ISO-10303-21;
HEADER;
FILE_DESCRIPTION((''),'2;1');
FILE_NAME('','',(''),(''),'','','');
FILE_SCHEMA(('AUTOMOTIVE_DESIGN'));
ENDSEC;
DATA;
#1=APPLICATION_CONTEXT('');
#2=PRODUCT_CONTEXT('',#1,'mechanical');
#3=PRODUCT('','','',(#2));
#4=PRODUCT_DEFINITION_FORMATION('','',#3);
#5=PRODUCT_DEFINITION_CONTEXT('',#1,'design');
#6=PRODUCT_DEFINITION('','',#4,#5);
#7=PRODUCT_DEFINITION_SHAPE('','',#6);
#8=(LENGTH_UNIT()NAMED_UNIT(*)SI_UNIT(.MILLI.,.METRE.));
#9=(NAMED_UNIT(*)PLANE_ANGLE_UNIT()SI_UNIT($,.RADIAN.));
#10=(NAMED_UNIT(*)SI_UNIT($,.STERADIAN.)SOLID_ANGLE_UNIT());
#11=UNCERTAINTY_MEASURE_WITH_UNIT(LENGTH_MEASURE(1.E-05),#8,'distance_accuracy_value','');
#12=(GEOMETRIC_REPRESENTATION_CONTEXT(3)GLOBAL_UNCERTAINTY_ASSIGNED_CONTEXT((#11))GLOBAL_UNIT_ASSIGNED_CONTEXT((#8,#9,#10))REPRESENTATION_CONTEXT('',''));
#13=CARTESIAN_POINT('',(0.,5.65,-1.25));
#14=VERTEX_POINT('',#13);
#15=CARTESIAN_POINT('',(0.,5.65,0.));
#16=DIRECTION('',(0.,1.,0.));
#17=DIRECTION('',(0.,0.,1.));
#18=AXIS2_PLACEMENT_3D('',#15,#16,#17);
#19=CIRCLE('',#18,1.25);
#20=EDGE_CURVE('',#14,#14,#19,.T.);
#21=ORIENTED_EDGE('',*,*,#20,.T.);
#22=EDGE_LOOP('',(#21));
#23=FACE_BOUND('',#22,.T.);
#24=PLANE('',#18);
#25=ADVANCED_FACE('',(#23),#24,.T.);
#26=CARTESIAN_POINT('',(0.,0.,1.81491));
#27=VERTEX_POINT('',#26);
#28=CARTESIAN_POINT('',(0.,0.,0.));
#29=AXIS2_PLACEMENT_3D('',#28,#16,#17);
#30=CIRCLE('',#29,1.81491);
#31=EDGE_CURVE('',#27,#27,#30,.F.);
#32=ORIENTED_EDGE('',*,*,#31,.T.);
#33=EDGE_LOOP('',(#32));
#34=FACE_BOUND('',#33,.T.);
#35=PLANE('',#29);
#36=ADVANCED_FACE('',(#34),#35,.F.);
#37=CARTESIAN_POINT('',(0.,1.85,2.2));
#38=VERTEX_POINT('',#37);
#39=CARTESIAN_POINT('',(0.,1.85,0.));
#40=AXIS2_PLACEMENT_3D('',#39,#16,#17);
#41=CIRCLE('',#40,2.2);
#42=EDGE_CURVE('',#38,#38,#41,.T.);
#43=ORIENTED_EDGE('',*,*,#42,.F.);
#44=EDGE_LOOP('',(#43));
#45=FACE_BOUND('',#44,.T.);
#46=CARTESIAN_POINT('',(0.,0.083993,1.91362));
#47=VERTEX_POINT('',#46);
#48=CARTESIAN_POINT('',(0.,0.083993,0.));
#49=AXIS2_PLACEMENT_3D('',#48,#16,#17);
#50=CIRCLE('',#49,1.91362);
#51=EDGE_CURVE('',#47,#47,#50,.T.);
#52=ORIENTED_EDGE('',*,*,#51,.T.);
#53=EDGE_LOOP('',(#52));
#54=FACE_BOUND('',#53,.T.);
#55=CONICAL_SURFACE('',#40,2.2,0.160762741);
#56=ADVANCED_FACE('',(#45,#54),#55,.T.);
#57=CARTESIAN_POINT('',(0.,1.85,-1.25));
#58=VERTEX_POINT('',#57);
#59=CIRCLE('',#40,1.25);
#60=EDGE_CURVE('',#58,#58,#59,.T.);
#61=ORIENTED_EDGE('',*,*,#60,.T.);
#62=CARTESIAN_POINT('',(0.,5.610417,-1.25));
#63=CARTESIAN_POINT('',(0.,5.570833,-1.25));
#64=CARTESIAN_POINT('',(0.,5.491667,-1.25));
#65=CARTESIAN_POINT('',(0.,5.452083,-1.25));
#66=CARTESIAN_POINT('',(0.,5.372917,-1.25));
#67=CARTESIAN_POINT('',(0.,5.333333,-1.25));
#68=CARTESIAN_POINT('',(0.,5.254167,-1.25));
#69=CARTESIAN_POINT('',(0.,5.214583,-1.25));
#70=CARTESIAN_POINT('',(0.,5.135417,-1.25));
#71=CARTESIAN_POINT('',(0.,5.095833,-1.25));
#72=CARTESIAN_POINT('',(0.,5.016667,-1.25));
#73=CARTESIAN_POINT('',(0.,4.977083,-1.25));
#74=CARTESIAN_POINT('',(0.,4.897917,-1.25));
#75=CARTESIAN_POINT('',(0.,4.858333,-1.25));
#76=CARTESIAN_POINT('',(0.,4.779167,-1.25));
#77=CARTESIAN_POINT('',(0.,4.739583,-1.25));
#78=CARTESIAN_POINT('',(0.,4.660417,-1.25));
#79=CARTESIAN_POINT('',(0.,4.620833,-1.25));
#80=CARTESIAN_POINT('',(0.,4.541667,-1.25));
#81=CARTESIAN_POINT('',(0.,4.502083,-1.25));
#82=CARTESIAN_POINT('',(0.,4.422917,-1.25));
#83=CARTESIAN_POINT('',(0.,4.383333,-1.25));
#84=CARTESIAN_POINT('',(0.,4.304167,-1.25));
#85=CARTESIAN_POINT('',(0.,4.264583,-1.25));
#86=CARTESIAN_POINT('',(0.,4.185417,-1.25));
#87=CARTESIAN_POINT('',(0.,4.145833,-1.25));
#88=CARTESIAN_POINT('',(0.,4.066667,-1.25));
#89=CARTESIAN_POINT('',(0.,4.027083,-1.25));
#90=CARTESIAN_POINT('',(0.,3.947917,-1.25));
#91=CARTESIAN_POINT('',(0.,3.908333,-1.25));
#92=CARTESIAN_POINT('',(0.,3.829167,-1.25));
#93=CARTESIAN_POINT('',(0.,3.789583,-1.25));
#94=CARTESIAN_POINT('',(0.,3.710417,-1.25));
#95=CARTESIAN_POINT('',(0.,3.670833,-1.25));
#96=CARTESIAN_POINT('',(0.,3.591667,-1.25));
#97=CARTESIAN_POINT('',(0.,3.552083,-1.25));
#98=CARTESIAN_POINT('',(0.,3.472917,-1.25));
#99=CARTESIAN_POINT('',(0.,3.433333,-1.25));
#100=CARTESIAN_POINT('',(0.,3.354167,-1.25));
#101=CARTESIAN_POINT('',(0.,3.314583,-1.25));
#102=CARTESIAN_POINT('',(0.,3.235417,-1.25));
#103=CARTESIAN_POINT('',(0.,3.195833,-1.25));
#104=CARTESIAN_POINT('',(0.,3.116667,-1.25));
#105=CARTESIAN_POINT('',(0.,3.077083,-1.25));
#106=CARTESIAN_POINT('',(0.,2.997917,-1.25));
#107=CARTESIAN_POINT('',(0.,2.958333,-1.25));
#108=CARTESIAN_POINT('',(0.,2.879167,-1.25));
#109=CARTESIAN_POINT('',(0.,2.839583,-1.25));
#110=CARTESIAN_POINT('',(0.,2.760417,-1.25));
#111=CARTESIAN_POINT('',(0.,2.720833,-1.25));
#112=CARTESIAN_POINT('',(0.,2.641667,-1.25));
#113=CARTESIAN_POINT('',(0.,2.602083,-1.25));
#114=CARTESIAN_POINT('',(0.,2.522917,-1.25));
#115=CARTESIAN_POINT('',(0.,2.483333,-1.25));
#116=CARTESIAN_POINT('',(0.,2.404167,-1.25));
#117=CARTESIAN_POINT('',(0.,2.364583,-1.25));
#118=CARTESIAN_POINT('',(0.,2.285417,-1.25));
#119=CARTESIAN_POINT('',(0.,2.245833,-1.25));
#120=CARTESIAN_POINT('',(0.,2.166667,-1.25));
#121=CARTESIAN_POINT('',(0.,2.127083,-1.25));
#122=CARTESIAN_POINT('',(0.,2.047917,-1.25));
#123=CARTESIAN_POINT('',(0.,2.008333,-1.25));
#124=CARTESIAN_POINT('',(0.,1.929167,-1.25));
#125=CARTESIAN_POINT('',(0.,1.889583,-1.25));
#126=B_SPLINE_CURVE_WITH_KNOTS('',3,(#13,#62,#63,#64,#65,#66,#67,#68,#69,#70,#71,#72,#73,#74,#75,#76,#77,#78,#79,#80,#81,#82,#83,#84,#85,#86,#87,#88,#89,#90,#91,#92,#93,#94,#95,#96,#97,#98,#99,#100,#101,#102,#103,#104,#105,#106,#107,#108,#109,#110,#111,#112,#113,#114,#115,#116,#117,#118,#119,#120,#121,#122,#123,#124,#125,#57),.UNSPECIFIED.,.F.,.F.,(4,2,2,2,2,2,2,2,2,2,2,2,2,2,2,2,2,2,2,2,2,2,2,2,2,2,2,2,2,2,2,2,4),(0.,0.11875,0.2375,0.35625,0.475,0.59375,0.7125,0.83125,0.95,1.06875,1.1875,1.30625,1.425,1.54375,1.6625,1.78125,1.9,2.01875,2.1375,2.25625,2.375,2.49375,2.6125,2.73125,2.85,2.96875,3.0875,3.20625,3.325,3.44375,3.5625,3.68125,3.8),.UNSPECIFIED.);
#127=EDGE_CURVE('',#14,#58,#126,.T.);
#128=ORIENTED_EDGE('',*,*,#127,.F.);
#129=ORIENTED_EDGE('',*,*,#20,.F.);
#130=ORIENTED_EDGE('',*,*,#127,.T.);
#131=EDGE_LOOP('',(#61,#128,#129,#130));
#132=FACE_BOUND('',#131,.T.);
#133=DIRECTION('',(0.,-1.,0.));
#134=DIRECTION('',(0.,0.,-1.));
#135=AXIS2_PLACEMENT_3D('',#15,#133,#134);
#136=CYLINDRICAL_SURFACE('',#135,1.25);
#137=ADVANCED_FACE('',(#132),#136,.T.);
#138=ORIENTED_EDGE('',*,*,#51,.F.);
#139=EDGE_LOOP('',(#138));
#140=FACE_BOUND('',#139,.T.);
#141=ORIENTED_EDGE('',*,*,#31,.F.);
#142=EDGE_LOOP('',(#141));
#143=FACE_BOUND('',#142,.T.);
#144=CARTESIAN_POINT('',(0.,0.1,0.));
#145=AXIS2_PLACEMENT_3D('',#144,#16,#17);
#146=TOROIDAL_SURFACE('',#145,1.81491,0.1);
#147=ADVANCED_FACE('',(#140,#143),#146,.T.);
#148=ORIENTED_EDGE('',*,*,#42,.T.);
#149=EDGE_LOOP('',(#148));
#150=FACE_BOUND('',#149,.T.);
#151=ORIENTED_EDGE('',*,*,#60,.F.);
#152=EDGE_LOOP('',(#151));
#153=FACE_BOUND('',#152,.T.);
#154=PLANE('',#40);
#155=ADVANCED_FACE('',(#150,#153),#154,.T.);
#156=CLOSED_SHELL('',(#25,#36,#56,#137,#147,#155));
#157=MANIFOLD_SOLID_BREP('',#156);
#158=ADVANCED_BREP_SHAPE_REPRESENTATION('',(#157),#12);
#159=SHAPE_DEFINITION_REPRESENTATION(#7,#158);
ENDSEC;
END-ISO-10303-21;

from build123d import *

# Parameters (mm, degrees)
ESQUISSE1_R        = 2.2
BOSS_EXTRU_1_DEPTH = 1.85
ESQUISSE2_R        = 1.25
BOSS_EXTRU_2_DEPTH = 3.8
CHANFREIN1_SIZE    = 1.85
CHANFREIN1_SIZE_2  = 0.3
CONG_1_R           = 0.1


with BuildPart() as part:
    # Esquisse1 → Boss.-Extru.1 (new body)
    with BuildSketch(Plane(origin=(0, 0, 0), x_dir=(1, 0, 0), z_dir=(0, 1, 0))):
        with Locations(Location((0, 0, 0), (0, 0, 270))):
            Circle(ESQUISSE1_R)
    extrude(amount=BOSS_EXTRU_1_DEPTH)

    # Esquisse2 → Boss.-Extru.2 (add)
    with BuildSketch(Plane(origin=(0, 1.85, 0), x_dir=(1, 0, 0), z_dir=(0, 1, 0))):
        with Locations(Location((0, 0, 0), (0, 0, 90))):
            Circle(ESQUISSE2_R)
    extrude(amount=BOSS_EXTRU_2_DEPTH)

    # Chanfrein1
    # the kernel refuses this chamfer: 1.85, 0.3 mm, written as the material it takes off along each edge
    with BuildSketch(Plane(origin=(0, 0, 0), x_dir=(0, 0, 1), z_dir=(-1, 0, 0))) as chanfrein1_piece_1:
        Polygon((2.2, CHANFREIN1_SIZE), (2.2 - CHANFREIN1_SIZE_2, 0), (2.2, 0), align=None)
    revolve(axis=Axis((0, 0, 0), (0, 1, 0)), mode=Mode.SUBTRACT)

    # Congé1
    cong_1_edges = [part.edges().sort_by_distance(p)[0] for p in [
        (0, 0, -1.9),
    ]]
    fillet(cong_1_edges, radius=CONG_1_R)


solid = part.part
